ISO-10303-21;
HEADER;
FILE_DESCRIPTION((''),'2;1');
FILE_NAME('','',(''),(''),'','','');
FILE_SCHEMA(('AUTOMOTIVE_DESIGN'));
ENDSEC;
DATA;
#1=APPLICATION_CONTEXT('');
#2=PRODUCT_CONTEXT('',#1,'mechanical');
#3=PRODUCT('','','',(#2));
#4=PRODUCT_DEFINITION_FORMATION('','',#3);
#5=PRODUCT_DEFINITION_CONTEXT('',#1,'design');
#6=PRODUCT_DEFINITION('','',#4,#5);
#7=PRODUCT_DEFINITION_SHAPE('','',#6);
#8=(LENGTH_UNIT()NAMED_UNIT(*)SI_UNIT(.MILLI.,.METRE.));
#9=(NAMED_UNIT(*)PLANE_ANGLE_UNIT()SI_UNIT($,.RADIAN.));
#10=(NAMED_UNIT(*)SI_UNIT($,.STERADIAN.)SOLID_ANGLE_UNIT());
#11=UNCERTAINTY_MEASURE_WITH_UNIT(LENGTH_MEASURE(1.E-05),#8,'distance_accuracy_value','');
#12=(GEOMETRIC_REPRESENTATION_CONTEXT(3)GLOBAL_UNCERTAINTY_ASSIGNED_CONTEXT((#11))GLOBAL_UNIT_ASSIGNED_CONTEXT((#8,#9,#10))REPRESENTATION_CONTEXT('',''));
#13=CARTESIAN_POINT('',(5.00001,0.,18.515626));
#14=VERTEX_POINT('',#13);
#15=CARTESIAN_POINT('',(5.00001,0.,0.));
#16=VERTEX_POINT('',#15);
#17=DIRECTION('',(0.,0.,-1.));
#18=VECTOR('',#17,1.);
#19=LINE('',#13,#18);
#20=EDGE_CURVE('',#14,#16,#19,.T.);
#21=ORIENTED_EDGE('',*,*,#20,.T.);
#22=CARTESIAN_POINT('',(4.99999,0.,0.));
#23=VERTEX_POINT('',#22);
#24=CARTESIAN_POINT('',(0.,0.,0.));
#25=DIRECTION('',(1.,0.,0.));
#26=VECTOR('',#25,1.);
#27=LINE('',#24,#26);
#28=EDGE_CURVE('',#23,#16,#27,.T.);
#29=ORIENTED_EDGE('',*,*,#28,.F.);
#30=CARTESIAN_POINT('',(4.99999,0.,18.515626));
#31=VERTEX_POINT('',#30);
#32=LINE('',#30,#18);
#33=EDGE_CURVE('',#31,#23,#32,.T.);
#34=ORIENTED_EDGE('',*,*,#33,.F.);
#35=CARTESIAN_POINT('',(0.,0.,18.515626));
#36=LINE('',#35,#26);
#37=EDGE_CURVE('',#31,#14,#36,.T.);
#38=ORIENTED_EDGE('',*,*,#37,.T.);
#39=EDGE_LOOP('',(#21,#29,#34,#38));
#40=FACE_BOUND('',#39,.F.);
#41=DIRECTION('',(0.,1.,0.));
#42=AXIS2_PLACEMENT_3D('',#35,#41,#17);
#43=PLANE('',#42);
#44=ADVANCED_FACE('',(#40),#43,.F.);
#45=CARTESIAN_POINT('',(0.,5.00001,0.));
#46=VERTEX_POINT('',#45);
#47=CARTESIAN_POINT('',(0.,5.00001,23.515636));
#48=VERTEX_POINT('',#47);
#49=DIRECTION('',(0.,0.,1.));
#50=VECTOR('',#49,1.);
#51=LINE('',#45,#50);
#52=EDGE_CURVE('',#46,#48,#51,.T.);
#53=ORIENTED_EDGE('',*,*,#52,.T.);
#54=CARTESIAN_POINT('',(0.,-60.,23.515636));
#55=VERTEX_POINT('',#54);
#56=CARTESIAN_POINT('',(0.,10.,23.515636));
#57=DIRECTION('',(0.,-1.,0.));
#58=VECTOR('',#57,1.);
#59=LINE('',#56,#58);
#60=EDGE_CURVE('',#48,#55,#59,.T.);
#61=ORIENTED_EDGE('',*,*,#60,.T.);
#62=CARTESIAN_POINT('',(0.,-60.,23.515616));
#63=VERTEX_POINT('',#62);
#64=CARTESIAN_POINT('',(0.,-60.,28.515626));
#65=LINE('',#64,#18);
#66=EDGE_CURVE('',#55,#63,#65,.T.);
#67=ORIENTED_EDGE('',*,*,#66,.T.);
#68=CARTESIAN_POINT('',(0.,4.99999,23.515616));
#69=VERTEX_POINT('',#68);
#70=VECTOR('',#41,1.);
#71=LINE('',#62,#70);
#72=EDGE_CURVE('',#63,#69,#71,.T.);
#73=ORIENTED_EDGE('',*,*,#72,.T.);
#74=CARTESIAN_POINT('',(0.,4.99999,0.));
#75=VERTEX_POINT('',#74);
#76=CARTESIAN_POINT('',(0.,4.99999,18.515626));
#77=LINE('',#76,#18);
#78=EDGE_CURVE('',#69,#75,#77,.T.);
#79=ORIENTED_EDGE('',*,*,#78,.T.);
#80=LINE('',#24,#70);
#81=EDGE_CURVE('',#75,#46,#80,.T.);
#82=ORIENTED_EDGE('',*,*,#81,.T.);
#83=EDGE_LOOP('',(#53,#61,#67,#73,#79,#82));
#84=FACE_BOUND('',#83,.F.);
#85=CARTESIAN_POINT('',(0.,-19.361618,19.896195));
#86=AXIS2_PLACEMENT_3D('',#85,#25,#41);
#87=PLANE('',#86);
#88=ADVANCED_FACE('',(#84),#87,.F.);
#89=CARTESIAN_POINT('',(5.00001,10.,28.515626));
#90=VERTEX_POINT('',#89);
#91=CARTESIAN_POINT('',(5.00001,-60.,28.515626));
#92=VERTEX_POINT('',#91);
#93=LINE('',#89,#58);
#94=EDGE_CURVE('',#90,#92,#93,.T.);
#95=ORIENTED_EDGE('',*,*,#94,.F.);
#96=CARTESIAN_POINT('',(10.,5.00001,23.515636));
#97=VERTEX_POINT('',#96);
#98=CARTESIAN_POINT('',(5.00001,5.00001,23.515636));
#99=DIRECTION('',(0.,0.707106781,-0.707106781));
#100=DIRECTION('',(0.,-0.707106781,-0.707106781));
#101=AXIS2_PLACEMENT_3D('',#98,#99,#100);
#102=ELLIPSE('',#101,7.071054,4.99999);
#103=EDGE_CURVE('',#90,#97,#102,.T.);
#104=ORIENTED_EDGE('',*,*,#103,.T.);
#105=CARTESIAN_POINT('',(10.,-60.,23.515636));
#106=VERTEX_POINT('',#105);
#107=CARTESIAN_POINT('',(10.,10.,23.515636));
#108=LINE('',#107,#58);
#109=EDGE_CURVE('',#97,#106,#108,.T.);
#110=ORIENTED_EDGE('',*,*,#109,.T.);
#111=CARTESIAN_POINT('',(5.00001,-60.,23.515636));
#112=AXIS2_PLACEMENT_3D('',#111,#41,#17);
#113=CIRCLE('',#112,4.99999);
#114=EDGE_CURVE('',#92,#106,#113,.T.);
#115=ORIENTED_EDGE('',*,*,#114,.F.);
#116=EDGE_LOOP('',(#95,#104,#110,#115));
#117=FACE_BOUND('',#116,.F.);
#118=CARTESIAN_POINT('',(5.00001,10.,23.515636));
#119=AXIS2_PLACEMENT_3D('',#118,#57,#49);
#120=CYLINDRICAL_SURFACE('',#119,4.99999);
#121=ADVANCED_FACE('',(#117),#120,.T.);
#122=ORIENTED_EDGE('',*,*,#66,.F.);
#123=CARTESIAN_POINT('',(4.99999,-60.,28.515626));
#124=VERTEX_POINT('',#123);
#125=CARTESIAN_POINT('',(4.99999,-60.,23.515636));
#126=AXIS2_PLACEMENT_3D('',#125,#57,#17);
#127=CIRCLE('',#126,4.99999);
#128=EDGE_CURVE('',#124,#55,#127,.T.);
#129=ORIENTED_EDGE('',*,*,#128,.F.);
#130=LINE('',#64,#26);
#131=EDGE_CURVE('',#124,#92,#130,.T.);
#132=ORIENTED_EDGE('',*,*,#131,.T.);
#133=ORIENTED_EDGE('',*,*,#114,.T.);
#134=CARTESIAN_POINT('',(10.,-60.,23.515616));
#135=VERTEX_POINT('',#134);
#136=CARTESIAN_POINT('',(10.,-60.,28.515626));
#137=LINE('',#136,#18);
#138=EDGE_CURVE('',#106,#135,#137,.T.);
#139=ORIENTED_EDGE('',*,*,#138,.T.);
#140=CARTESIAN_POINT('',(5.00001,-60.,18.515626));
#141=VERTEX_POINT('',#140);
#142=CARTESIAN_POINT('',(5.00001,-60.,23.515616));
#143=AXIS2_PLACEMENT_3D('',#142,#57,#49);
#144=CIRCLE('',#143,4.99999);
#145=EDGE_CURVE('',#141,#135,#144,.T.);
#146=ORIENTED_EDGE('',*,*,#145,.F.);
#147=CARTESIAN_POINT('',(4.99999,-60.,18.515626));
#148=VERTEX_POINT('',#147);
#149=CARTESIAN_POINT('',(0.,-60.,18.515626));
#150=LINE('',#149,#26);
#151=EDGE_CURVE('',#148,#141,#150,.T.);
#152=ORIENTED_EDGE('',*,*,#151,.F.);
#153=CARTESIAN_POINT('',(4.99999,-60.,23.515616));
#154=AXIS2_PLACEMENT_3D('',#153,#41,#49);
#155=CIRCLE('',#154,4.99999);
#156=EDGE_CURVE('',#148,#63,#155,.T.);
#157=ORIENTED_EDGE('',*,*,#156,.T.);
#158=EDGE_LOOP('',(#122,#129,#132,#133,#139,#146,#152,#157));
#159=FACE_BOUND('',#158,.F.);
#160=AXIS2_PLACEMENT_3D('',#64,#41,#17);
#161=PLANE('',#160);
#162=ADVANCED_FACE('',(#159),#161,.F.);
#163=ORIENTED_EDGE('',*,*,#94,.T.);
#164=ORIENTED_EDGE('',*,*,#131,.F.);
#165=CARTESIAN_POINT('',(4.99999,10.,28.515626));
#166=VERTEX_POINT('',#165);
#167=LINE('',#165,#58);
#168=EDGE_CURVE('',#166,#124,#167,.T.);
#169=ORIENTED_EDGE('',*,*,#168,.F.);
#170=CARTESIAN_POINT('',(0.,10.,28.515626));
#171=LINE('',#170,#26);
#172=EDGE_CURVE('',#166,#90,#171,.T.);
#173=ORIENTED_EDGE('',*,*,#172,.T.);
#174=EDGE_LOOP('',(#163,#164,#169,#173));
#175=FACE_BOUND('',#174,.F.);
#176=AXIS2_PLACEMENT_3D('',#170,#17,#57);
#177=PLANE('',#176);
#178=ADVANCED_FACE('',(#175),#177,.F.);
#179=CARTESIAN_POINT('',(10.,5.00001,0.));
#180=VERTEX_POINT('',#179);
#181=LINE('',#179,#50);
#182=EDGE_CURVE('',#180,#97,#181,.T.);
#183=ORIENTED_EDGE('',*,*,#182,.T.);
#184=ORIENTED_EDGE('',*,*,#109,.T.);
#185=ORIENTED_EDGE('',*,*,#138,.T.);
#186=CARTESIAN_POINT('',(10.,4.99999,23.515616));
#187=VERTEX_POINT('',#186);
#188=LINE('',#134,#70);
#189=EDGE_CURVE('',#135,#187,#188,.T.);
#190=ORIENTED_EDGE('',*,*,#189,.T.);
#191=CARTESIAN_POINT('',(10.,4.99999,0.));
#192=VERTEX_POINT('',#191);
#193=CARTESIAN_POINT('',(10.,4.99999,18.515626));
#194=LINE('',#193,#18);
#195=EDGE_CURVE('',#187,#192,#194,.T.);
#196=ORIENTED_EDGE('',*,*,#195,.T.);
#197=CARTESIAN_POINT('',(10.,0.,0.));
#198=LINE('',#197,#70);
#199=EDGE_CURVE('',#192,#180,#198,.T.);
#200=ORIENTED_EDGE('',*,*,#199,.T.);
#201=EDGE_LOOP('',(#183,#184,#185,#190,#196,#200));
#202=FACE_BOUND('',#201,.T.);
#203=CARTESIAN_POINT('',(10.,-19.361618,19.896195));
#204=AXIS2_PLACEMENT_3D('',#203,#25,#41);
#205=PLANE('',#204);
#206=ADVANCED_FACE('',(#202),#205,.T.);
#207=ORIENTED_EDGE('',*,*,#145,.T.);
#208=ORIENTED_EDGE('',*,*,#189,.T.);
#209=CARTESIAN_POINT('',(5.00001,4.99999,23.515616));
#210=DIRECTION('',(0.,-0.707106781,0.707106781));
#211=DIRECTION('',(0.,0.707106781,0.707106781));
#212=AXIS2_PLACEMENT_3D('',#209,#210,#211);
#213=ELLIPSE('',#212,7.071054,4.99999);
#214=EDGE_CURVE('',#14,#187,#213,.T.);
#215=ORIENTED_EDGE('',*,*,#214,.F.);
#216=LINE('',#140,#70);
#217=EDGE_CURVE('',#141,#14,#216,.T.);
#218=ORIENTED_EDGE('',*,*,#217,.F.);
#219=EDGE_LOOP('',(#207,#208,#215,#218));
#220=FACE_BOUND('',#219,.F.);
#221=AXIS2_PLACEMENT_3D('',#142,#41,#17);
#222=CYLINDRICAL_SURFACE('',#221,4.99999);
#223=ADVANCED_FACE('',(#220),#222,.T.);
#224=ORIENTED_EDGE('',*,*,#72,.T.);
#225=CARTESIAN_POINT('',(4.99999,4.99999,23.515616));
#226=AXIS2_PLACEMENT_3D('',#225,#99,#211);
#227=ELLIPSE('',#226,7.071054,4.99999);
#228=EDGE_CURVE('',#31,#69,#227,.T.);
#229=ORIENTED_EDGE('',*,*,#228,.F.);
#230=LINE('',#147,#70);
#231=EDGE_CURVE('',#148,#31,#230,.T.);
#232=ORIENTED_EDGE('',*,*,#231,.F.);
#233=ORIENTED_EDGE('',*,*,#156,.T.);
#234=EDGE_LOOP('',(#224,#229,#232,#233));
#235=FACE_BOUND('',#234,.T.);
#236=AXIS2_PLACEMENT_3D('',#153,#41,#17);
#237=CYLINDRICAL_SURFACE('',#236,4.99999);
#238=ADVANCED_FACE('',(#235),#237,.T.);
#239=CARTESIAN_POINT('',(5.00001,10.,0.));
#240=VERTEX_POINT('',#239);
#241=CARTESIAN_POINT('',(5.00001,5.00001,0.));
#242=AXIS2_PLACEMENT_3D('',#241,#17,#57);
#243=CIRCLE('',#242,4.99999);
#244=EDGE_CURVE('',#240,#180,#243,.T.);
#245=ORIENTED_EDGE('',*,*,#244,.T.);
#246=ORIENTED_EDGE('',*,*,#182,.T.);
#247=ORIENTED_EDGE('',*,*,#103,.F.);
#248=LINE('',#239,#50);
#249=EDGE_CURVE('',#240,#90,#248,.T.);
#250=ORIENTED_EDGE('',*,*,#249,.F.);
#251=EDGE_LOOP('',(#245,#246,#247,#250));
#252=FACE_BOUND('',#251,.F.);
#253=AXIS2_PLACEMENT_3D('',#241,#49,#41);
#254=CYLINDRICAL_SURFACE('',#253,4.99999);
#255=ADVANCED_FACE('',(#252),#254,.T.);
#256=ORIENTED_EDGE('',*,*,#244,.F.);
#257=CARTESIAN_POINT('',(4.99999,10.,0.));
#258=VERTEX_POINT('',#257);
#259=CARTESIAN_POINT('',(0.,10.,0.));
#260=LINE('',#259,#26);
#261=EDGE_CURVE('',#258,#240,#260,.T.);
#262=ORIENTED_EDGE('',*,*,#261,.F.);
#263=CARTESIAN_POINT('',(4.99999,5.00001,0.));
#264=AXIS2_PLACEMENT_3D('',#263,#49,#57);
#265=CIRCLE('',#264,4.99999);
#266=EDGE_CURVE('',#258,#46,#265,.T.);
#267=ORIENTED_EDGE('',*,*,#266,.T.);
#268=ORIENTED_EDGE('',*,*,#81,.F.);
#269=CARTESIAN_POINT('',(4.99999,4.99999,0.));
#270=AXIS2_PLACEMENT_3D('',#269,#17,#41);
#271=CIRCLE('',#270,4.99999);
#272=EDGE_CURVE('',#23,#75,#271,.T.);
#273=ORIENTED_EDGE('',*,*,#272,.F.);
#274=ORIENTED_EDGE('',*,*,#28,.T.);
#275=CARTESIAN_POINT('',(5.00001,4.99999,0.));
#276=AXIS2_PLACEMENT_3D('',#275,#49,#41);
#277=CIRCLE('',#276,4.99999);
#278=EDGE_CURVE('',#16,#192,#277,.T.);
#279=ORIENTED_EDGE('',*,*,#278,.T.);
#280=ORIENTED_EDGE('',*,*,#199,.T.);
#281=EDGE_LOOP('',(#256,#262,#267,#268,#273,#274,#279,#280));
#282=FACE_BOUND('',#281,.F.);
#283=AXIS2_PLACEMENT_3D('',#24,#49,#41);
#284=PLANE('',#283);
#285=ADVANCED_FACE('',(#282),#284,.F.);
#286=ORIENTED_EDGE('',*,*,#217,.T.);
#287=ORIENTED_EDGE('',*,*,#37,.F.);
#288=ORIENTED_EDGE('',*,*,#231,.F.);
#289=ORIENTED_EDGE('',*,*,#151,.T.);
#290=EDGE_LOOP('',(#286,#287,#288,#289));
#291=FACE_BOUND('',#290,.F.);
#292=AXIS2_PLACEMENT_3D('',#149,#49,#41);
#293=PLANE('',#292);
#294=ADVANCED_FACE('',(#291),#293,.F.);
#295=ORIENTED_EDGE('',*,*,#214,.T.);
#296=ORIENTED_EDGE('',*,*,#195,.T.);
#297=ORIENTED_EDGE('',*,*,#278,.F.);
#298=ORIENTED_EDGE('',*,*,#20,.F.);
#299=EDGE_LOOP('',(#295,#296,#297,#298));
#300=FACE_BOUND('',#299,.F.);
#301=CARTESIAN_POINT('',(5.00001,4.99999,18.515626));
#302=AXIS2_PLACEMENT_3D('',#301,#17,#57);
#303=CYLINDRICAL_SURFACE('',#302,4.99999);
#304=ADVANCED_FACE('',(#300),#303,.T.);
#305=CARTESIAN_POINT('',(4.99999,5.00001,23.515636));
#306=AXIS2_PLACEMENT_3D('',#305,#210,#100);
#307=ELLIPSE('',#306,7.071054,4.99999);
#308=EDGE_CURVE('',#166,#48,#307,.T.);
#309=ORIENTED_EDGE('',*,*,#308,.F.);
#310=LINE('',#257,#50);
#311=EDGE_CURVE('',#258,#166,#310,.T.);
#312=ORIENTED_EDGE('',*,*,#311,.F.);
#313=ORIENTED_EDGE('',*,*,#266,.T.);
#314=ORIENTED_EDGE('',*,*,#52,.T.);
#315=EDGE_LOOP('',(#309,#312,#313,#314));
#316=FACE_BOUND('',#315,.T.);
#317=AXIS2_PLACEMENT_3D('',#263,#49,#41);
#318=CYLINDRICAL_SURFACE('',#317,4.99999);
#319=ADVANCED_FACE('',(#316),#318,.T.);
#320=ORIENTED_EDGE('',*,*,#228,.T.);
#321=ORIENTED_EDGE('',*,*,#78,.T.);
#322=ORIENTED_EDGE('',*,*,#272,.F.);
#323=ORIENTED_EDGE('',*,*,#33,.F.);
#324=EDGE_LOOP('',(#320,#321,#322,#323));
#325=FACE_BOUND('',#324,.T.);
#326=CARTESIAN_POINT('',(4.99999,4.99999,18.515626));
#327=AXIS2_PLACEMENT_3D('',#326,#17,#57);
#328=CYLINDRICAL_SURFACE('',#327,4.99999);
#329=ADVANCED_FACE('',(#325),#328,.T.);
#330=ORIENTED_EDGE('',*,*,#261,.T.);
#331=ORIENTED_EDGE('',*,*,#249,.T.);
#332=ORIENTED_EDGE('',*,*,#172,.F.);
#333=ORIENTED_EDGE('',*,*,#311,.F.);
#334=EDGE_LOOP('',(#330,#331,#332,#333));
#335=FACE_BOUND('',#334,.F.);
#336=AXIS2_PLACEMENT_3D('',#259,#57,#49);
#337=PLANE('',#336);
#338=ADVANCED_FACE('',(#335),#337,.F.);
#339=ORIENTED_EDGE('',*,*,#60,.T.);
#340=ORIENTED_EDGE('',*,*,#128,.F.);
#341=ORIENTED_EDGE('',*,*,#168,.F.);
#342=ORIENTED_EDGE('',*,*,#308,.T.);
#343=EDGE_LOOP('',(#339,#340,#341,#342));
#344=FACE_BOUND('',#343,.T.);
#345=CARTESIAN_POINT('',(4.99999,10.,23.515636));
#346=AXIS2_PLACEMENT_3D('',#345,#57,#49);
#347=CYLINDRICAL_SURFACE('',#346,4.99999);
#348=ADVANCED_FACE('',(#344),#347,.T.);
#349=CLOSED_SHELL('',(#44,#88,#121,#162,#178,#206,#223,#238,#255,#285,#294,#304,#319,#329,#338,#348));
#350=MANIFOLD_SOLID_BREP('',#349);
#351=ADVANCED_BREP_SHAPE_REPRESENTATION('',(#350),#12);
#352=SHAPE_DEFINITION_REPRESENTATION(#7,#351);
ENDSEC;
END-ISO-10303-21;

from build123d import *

# Parameters (mm, degrees)
F1_DEPTH = 10
F2_R     = 4.99999


# Not quite as in the source:
# - a fillet or chamfer is up to 0.001 mm smaller than in the source, because OpenCascade refuses the exact size


with BuildPart() as f1:
    # F0 (on Right) → F1 (new body)
    with BuildSketch(Plane.YZ):
        Polygon((0, 18.5156259346), (0, 0), (10, 0), (10, 28.5156259346), (-60, 28.5156259346), (-60, 18.5156259346), align=None)
    extrude(amount=F1_DEPTH)

    # F2 (radius 5 in the source; OpenCascade refuses exactly that, so slightly less here)
    f2_edges = [f1.edges().sort_by_distance(p)[0] for p in [
        (10, -30, 18.515626),
        (0, -30, 18.515626),
        (10, -25, 28.515626),
        (0, -25, 28.515626),
        (10, 0, 9.257813),
        (0, 0, 9.257813),
        (0, 10, 14.257813),
        (10, 10, 14.257813),
    ]]
    fillet(f2_edges, radius=F2_R)


solid = f1.part
